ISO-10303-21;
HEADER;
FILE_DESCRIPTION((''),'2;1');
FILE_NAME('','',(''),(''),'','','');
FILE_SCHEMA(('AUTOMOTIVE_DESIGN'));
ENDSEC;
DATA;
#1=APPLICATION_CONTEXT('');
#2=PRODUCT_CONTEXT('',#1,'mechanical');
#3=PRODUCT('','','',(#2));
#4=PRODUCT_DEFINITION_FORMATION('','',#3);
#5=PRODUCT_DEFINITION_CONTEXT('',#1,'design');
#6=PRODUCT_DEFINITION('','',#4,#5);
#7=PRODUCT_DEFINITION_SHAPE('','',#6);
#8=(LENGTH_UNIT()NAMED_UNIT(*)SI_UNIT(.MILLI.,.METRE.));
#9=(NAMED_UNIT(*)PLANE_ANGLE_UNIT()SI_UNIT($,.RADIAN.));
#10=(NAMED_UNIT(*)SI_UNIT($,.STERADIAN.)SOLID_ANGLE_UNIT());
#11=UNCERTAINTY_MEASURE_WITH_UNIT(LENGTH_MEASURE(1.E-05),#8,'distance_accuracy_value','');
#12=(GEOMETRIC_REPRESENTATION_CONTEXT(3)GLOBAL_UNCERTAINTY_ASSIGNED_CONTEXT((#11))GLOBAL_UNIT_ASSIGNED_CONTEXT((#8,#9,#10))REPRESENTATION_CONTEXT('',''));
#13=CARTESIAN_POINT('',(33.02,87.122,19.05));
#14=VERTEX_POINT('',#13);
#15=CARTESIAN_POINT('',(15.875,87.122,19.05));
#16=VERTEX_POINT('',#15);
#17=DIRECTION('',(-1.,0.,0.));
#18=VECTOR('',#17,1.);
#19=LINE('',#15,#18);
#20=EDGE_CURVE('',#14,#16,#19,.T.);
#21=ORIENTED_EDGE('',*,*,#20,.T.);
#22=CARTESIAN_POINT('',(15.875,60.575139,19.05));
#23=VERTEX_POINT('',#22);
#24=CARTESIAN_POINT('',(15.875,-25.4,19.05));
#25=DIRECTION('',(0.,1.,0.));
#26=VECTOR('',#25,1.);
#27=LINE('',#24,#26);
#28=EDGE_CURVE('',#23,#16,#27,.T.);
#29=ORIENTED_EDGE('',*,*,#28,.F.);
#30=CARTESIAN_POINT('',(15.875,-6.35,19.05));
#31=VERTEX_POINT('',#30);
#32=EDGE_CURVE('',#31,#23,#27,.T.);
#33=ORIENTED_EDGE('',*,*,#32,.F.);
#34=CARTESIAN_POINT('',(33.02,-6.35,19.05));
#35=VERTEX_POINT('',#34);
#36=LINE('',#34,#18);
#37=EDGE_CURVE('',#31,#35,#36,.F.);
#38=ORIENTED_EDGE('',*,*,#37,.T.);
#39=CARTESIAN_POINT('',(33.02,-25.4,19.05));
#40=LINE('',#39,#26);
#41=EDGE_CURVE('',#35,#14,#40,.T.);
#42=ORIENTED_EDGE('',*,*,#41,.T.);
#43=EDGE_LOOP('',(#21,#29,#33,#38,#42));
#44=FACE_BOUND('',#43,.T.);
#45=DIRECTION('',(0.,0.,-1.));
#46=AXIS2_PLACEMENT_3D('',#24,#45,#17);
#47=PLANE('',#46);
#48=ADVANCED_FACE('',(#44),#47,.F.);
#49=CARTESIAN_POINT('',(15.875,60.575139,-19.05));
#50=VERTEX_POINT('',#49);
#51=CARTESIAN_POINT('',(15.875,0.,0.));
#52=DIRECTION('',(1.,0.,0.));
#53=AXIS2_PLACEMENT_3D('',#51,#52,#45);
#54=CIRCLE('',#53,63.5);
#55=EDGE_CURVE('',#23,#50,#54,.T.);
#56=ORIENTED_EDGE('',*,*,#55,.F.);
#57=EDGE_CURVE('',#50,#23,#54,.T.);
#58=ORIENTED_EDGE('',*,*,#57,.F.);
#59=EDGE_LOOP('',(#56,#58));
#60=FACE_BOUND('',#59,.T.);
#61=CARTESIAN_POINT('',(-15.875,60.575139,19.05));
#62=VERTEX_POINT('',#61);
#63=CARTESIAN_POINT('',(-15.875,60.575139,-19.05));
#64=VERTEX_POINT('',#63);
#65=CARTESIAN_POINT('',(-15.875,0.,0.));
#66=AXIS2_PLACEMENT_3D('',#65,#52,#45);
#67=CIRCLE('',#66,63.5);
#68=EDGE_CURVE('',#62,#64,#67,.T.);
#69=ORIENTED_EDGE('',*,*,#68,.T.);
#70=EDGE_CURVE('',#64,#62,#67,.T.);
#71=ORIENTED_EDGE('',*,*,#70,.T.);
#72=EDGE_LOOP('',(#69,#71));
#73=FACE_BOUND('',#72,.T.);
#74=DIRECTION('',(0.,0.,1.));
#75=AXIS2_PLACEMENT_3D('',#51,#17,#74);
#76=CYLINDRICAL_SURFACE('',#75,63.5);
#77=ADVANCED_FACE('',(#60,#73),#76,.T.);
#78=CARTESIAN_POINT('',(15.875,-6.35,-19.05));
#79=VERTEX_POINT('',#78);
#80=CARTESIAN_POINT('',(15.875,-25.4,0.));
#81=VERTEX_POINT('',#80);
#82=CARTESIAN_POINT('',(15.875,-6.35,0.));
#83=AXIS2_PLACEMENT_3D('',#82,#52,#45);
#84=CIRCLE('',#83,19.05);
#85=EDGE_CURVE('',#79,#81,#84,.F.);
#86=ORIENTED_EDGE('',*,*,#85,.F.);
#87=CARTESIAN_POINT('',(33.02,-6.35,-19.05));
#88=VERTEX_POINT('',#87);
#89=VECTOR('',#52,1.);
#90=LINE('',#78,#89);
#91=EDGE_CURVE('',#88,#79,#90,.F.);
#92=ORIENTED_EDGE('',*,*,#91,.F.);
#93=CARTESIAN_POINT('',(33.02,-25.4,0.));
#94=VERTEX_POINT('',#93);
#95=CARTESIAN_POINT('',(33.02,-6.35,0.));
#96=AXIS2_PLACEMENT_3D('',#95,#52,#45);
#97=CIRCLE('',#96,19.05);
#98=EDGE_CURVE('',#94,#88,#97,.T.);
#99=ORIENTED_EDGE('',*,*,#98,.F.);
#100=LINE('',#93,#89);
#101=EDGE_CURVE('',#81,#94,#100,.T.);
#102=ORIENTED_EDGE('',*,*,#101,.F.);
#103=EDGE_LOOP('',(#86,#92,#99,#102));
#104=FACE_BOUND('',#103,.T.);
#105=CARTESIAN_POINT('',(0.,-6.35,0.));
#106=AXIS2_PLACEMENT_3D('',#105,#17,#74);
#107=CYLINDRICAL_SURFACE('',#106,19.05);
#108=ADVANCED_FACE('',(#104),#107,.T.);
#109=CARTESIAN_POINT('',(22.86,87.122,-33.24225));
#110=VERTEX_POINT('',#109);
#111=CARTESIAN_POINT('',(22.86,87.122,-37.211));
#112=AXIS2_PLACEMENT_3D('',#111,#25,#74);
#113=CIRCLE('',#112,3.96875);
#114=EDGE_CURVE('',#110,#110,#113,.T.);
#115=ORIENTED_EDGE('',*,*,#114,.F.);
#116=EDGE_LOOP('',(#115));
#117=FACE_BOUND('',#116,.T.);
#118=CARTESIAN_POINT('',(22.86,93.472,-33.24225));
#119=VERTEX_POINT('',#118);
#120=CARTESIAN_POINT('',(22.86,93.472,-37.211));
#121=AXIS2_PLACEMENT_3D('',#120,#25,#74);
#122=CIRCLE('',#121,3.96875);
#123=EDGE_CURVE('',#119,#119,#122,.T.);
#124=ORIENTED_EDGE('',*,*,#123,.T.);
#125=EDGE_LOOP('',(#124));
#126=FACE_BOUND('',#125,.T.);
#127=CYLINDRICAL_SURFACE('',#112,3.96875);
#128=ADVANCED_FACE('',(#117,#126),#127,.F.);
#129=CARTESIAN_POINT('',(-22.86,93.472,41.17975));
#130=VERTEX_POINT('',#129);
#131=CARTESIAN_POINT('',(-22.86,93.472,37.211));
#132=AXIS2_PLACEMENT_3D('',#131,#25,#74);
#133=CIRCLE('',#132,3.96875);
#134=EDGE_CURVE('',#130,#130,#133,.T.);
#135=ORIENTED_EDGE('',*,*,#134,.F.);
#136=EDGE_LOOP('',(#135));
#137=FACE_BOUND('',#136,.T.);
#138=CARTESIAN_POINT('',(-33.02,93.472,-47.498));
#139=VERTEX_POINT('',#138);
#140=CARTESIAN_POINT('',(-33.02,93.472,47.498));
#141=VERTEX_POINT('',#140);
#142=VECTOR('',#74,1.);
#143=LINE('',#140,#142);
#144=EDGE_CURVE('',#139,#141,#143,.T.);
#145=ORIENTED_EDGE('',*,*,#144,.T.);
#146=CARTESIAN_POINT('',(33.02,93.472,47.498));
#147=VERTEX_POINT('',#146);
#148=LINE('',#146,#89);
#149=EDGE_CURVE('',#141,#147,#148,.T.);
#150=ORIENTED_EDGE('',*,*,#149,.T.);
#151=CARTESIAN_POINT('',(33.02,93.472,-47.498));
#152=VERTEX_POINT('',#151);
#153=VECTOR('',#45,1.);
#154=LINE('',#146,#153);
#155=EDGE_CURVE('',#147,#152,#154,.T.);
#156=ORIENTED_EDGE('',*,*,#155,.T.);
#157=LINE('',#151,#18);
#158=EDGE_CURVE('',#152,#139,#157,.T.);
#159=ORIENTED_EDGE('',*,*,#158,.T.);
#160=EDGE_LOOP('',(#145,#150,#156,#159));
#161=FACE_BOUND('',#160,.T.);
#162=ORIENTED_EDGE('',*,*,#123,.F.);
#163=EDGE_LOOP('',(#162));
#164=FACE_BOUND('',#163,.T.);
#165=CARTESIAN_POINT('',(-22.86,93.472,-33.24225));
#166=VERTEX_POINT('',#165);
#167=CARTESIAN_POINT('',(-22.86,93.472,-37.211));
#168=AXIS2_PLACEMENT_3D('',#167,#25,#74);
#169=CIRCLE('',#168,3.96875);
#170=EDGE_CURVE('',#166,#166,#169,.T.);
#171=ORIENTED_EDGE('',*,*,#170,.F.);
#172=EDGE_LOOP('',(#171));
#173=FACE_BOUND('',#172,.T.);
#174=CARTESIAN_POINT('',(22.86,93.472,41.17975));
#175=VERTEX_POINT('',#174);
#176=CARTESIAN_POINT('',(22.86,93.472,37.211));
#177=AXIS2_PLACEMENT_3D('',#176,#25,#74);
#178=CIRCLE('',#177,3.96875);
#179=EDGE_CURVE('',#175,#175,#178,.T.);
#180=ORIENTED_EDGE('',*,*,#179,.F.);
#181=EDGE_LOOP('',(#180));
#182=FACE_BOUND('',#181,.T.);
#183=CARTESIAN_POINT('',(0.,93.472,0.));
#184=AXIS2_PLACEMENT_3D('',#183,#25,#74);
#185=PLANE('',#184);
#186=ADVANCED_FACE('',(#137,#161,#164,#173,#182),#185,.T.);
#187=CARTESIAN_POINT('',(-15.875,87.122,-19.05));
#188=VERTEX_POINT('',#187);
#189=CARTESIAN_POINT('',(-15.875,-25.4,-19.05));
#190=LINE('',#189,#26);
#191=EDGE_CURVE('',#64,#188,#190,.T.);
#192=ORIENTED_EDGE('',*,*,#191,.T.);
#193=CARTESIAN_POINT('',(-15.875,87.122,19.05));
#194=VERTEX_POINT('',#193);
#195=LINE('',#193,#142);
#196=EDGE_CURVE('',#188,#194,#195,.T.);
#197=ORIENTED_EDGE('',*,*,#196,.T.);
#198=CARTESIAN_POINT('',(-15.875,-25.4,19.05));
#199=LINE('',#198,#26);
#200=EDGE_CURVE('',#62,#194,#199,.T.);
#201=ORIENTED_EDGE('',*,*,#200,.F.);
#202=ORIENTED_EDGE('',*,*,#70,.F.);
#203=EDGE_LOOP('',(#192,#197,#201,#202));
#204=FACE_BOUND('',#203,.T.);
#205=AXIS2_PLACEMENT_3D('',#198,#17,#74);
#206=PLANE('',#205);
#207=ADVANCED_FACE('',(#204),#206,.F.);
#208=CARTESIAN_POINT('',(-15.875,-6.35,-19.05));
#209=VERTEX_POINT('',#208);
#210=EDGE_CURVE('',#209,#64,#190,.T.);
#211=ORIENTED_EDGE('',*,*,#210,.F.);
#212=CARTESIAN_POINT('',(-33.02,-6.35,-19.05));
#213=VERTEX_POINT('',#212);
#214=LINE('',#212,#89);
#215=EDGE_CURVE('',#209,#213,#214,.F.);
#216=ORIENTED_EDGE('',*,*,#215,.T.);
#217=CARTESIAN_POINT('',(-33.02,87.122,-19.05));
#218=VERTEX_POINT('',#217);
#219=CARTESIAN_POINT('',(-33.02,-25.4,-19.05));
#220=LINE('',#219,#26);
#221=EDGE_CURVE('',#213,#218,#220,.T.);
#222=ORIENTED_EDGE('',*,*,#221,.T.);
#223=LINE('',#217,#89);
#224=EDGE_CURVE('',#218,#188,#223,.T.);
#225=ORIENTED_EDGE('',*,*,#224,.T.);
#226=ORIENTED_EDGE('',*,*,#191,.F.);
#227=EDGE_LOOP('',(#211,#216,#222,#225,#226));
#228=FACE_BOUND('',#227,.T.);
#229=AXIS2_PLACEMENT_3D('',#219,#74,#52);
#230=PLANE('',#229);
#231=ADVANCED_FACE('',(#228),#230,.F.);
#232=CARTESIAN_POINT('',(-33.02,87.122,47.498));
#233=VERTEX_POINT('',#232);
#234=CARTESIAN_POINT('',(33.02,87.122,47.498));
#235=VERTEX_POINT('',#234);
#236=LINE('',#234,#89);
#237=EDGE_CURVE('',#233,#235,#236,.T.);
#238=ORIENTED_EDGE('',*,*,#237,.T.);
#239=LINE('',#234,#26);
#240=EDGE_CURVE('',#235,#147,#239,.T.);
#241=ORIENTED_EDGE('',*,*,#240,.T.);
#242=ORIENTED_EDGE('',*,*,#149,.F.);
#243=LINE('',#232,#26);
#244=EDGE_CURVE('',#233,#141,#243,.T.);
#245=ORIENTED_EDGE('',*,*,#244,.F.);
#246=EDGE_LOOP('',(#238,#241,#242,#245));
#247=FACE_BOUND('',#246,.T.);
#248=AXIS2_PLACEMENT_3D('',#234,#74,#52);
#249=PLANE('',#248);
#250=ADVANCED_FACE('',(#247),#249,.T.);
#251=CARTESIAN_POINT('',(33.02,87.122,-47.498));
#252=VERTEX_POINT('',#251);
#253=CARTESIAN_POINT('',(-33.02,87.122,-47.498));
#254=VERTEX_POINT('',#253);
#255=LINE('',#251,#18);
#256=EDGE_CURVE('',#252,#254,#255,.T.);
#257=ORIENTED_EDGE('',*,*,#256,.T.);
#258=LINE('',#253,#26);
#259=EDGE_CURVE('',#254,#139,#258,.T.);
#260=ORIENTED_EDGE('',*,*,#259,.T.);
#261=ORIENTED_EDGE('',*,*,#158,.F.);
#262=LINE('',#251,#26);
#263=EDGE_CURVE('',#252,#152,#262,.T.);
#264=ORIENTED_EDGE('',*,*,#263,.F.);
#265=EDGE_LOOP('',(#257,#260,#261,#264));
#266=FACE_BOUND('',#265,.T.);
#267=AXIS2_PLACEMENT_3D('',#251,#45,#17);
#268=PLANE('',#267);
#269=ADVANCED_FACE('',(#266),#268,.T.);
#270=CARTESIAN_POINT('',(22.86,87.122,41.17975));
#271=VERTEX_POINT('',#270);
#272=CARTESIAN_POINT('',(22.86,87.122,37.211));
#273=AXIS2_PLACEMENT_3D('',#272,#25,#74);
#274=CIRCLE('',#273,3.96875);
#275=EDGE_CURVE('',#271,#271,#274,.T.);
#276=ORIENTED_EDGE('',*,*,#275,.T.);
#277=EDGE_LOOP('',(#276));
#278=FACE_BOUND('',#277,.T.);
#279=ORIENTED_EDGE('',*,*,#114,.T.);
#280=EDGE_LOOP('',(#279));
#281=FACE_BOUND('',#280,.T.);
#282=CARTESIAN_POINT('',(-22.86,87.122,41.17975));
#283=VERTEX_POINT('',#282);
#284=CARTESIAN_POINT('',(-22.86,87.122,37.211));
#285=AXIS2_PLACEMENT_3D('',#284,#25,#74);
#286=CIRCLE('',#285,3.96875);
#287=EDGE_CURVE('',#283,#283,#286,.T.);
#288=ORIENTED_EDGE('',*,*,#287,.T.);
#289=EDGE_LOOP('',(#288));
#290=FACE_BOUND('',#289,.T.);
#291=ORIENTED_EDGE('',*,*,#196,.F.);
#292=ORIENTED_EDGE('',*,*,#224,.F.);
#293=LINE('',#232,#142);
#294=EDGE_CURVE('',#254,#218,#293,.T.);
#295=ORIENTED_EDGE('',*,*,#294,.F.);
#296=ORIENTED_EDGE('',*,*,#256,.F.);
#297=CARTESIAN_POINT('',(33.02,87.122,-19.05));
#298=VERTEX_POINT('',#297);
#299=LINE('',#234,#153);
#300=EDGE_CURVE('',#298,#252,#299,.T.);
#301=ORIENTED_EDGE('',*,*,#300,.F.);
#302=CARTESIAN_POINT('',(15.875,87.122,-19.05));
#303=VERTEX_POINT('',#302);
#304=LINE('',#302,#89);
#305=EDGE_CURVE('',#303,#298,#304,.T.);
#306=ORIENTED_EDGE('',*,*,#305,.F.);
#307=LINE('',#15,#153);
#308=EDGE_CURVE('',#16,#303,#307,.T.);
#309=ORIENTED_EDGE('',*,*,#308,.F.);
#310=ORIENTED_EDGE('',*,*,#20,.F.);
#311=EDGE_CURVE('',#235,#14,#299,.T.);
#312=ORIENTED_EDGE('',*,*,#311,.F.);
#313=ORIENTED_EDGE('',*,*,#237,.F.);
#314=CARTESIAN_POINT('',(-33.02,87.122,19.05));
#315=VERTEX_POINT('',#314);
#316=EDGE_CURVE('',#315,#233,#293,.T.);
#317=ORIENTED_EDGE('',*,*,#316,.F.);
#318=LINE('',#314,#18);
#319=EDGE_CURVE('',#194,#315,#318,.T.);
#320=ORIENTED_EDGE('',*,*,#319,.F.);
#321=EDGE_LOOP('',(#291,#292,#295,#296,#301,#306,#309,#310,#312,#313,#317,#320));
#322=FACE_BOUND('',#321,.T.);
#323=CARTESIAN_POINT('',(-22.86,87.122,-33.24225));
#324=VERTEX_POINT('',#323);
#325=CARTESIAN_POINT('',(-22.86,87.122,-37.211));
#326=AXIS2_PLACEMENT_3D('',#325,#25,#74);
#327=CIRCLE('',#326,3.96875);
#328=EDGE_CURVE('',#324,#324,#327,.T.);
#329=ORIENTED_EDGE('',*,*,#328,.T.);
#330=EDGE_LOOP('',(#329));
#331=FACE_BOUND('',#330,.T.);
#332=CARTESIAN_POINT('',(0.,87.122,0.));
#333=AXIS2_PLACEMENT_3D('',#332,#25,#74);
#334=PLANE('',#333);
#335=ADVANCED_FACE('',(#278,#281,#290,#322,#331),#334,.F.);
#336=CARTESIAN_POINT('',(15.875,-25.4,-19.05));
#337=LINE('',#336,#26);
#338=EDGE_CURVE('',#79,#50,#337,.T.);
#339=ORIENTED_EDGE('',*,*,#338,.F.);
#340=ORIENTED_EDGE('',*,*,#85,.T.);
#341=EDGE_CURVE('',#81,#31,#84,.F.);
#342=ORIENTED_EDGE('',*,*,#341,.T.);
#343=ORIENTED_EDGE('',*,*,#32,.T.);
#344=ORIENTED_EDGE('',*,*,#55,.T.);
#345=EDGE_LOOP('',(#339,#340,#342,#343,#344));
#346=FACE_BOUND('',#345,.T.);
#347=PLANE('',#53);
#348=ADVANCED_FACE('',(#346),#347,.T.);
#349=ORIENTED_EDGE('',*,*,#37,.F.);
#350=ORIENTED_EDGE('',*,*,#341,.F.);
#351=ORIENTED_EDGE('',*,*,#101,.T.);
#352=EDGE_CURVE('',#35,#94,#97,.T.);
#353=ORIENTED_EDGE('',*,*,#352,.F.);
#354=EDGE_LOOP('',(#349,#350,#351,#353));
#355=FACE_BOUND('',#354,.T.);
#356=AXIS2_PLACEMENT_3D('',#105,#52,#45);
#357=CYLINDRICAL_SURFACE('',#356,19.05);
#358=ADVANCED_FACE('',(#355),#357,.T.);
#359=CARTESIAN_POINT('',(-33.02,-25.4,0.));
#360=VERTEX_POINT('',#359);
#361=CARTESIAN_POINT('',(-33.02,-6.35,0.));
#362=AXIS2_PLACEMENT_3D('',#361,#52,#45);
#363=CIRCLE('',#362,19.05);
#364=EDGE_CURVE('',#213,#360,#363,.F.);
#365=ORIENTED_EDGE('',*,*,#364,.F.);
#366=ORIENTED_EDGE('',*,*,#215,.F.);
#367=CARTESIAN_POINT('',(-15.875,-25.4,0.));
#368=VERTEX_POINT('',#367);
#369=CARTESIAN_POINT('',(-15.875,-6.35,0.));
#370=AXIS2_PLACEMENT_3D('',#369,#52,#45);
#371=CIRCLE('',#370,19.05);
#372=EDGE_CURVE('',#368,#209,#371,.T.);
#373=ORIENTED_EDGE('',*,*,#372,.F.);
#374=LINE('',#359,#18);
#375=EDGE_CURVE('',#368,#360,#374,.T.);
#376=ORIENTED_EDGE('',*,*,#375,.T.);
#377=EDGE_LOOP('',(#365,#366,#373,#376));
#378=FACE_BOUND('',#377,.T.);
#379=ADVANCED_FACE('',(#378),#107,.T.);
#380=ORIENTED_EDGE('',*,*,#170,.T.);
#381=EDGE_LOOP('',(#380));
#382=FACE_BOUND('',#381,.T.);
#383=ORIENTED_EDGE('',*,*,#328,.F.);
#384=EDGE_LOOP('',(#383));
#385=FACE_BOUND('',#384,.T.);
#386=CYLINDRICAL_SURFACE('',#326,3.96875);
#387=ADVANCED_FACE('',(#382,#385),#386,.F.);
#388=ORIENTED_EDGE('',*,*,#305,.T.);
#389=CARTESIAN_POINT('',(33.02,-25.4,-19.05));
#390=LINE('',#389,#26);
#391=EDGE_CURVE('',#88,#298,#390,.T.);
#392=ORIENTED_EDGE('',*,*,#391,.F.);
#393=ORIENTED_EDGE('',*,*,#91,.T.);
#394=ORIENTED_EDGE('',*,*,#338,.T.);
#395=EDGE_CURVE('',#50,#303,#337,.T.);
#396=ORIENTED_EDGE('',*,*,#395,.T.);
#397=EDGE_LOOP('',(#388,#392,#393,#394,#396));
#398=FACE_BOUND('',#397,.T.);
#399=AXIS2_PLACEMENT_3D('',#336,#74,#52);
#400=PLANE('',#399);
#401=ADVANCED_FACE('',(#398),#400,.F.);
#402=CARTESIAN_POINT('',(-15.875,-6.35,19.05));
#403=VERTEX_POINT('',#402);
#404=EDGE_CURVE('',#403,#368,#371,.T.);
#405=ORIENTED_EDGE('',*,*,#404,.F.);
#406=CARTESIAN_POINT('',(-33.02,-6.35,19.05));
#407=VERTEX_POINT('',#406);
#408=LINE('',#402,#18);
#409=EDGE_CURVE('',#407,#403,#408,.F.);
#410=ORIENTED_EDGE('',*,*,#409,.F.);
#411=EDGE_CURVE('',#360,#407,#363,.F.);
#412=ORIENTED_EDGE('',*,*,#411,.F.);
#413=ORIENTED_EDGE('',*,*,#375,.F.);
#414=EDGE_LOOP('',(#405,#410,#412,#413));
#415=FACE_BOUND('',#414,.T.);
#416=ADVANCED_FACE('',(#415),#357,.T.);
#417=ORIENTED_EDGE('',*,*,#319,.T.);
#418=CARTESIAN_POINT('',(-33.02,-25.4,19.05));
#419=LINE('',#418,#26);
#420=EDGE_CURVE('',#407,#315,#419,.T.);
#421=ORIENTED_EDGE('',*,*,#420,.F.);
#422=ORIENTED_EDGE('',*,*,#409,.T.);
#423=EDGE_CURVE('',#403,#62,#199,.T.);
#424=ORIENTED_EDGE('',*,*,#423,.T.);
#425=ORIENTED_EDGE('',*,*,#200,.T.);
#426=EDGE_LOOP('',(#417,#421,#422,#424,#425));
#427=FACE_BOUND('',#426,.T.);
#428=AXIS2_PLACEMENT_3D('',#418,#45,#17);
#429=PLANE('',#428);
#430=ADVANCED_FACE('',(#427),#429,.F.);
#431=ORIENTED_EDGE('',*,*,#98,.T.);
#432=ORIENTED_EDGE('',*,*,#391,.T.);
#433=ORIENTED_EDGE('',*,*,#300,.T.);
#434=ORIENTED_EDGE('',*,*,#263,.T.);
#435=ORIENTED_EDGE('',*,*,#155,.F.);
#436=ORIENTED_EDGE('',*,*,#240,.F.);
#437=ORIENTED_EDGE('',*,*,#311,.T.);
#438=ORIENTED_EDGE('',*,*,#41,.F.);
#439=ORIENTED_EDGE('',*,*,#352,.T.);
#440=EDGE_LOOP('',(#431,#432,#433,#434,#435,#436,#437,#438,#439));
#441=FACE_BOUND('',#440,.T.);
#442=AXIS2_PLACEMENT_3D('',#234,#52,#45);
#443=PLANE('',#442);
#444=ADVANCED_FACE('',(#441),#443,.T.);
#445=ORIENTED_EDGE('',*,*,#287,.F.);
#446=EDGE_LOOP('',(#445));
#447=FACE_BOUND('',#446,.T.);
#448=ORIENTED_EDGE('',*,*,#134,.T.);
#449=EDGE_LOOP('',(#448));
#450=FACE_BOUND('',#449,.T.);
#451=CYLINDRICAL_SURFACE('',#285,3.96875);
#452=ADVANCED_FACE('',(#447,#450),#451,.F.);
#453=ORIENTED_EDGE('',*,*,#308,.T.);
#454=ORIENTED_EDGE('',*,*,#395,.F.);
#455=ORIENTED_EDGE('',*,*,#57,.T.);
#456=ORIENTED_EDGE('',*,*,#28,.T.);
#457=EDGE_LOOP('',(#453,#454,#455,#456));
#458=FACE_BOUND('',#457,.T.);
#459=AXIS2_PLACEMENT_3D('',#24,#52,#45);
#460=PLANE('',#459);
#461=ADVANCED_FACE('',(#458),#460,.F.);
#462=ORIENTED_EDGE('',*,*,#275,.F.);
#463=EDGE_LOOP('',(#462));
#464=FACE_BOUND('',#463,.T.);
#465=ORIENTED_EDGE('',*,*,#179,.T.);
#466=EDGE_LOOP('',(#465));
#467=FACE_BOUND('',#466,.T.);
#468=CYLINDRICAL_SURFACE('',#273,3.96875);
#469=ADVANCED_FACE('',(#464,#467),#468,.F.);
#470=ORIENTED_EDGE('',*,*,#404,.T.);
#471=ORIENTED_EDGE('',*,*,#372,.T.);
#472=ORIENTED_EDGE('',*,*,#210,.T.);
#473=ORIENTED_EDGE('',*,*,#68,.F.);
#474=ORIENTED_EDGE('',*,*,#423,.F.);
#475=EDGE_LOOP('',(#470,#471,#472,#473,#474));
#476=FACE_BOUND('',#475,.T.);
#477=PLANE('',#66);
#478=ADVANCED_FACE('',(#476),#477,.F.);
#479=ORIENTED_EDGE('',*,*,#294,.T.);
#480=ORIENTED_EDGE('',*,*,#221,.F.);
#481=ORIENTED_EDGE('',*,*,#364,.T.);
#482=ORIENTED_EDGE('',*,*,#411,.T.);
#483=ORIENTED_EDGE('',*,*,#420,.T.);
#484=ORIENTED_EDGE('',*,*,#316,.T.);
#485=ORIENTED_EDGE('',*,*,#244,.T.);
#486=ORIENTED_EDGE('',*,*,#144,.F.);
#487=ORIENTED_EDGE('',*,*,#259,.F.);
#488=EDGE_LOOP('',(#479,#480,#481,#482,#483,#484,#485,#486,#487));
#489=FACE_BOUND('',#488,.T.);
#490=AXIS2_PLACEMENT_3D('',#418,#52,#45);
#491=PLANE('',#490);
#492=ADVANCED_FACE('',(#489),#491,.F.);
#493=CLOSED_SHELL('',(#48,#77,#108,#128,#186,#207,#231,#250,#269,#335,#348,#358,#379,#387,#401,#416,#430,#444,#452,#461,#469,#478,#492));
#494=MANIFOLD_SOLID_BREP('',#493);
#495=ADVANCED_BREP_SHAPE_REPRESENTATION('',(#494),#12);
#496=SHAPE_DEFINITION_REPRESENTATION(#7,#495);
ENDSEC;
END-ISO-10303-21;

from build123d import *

# Parameters (mm, degrees)
SKETCH1_R           = 63.5
BOSS_EXTRUDE1_DEPTH = 15.875
BOSS_EXTRUDE2_START = 93.472
SKETCH2_W           = 66.04
SKETCH2_H           = 94.996
SKETCH2_R           = 3.96875
BOSS_EXTRUDE2_DEPTH = 6.35
SKETCH3_W           = 17.145
SKETCH3_H           = 38.1
BOSS_EXTRUDE3_DEPTH = 112.522
FILLET1_R           = 19.05


with BuildPart() as part:
    # Sketch1 → Boss-Extrude1 (new, symmetric)
    with BuildSketch(Plane(origin=(0, 0, 0), x_dir=(0, 0, -1), z_dir=(1, 0, 0))):
        Circle(SKETCH1_R)
    extrude(amount=BOSS_EXTRUDE1_DEPTH, both=True)



with BuildPart() as body_2:
    # Sketch2 → Boss-Extrude2 (new body)
    with BuildSketch(Plane(origin=(0, 0, 0), x_dir=(1, 0, 0), z_dir=(0, 1, 0)).offset(BOSS_EXTRUDE2_START)):
        Rectangle(SKETCH2_W, SKETCH2_H)
        with Locations(Location((-22.86, 37.211, 0), (0, 0, 270))):
            Circle(SKETCH2_R, mode=Mode.SUBTRACT)
        with Locations(Location((22.86, 37.211, 0), (0, 0, 270))):
            Circle(SKETCH2_R, mode=Mode.SUBTRACT)
        with Locations(Location((22.86, -37.211, 0), (0, 0, 270))):
            Circle(SKETCH2_R, mode=Mode.SUBTRACT)
        with Locations(Location((-22.86, -37.211, 0), (0, 0, 270))):
            Circle(SKETCH2_R, mode=Mode.SUBTRACT)
    extrude(amount=-BOSS_EXTRUDE2_DEPTH)


with BuildPart() as part_1:
    add(part.part)

    add(body_2.part)  # Boss-Extrude3 merges body 2
    # Sketch3 → Boss-Extrude3 (add)
    with BuildSketch(Plane.XZ.offset(-87.122)):
        with Locations((-24.4475, 0)):
            Rectangle(SKETCH3_W, SKETCH3_H)
        with Locations((24.4475, 0)):
            Rectangle(SKETCH3_W, SKETCH3_H)
    extrude(amount=BOSS_EXTRUDE3_DEPTH)

    # Fillet1
    fillet1_edges = [part_1.edges().sort_by_distance(p)[0] for p in [
        (-24.4475, -25.4, -19.05),
        (-24.4475, -25.4, 19.05),
        (24.4475, -25.4, 19.05),
        (24.4475, -25.4, -19.05),
    ]]
    fillet(fillet1_edges, radius=FILLET1_R - 0.0001)  # a hair under: the kernel refuses the full size


solid = part_1.part
